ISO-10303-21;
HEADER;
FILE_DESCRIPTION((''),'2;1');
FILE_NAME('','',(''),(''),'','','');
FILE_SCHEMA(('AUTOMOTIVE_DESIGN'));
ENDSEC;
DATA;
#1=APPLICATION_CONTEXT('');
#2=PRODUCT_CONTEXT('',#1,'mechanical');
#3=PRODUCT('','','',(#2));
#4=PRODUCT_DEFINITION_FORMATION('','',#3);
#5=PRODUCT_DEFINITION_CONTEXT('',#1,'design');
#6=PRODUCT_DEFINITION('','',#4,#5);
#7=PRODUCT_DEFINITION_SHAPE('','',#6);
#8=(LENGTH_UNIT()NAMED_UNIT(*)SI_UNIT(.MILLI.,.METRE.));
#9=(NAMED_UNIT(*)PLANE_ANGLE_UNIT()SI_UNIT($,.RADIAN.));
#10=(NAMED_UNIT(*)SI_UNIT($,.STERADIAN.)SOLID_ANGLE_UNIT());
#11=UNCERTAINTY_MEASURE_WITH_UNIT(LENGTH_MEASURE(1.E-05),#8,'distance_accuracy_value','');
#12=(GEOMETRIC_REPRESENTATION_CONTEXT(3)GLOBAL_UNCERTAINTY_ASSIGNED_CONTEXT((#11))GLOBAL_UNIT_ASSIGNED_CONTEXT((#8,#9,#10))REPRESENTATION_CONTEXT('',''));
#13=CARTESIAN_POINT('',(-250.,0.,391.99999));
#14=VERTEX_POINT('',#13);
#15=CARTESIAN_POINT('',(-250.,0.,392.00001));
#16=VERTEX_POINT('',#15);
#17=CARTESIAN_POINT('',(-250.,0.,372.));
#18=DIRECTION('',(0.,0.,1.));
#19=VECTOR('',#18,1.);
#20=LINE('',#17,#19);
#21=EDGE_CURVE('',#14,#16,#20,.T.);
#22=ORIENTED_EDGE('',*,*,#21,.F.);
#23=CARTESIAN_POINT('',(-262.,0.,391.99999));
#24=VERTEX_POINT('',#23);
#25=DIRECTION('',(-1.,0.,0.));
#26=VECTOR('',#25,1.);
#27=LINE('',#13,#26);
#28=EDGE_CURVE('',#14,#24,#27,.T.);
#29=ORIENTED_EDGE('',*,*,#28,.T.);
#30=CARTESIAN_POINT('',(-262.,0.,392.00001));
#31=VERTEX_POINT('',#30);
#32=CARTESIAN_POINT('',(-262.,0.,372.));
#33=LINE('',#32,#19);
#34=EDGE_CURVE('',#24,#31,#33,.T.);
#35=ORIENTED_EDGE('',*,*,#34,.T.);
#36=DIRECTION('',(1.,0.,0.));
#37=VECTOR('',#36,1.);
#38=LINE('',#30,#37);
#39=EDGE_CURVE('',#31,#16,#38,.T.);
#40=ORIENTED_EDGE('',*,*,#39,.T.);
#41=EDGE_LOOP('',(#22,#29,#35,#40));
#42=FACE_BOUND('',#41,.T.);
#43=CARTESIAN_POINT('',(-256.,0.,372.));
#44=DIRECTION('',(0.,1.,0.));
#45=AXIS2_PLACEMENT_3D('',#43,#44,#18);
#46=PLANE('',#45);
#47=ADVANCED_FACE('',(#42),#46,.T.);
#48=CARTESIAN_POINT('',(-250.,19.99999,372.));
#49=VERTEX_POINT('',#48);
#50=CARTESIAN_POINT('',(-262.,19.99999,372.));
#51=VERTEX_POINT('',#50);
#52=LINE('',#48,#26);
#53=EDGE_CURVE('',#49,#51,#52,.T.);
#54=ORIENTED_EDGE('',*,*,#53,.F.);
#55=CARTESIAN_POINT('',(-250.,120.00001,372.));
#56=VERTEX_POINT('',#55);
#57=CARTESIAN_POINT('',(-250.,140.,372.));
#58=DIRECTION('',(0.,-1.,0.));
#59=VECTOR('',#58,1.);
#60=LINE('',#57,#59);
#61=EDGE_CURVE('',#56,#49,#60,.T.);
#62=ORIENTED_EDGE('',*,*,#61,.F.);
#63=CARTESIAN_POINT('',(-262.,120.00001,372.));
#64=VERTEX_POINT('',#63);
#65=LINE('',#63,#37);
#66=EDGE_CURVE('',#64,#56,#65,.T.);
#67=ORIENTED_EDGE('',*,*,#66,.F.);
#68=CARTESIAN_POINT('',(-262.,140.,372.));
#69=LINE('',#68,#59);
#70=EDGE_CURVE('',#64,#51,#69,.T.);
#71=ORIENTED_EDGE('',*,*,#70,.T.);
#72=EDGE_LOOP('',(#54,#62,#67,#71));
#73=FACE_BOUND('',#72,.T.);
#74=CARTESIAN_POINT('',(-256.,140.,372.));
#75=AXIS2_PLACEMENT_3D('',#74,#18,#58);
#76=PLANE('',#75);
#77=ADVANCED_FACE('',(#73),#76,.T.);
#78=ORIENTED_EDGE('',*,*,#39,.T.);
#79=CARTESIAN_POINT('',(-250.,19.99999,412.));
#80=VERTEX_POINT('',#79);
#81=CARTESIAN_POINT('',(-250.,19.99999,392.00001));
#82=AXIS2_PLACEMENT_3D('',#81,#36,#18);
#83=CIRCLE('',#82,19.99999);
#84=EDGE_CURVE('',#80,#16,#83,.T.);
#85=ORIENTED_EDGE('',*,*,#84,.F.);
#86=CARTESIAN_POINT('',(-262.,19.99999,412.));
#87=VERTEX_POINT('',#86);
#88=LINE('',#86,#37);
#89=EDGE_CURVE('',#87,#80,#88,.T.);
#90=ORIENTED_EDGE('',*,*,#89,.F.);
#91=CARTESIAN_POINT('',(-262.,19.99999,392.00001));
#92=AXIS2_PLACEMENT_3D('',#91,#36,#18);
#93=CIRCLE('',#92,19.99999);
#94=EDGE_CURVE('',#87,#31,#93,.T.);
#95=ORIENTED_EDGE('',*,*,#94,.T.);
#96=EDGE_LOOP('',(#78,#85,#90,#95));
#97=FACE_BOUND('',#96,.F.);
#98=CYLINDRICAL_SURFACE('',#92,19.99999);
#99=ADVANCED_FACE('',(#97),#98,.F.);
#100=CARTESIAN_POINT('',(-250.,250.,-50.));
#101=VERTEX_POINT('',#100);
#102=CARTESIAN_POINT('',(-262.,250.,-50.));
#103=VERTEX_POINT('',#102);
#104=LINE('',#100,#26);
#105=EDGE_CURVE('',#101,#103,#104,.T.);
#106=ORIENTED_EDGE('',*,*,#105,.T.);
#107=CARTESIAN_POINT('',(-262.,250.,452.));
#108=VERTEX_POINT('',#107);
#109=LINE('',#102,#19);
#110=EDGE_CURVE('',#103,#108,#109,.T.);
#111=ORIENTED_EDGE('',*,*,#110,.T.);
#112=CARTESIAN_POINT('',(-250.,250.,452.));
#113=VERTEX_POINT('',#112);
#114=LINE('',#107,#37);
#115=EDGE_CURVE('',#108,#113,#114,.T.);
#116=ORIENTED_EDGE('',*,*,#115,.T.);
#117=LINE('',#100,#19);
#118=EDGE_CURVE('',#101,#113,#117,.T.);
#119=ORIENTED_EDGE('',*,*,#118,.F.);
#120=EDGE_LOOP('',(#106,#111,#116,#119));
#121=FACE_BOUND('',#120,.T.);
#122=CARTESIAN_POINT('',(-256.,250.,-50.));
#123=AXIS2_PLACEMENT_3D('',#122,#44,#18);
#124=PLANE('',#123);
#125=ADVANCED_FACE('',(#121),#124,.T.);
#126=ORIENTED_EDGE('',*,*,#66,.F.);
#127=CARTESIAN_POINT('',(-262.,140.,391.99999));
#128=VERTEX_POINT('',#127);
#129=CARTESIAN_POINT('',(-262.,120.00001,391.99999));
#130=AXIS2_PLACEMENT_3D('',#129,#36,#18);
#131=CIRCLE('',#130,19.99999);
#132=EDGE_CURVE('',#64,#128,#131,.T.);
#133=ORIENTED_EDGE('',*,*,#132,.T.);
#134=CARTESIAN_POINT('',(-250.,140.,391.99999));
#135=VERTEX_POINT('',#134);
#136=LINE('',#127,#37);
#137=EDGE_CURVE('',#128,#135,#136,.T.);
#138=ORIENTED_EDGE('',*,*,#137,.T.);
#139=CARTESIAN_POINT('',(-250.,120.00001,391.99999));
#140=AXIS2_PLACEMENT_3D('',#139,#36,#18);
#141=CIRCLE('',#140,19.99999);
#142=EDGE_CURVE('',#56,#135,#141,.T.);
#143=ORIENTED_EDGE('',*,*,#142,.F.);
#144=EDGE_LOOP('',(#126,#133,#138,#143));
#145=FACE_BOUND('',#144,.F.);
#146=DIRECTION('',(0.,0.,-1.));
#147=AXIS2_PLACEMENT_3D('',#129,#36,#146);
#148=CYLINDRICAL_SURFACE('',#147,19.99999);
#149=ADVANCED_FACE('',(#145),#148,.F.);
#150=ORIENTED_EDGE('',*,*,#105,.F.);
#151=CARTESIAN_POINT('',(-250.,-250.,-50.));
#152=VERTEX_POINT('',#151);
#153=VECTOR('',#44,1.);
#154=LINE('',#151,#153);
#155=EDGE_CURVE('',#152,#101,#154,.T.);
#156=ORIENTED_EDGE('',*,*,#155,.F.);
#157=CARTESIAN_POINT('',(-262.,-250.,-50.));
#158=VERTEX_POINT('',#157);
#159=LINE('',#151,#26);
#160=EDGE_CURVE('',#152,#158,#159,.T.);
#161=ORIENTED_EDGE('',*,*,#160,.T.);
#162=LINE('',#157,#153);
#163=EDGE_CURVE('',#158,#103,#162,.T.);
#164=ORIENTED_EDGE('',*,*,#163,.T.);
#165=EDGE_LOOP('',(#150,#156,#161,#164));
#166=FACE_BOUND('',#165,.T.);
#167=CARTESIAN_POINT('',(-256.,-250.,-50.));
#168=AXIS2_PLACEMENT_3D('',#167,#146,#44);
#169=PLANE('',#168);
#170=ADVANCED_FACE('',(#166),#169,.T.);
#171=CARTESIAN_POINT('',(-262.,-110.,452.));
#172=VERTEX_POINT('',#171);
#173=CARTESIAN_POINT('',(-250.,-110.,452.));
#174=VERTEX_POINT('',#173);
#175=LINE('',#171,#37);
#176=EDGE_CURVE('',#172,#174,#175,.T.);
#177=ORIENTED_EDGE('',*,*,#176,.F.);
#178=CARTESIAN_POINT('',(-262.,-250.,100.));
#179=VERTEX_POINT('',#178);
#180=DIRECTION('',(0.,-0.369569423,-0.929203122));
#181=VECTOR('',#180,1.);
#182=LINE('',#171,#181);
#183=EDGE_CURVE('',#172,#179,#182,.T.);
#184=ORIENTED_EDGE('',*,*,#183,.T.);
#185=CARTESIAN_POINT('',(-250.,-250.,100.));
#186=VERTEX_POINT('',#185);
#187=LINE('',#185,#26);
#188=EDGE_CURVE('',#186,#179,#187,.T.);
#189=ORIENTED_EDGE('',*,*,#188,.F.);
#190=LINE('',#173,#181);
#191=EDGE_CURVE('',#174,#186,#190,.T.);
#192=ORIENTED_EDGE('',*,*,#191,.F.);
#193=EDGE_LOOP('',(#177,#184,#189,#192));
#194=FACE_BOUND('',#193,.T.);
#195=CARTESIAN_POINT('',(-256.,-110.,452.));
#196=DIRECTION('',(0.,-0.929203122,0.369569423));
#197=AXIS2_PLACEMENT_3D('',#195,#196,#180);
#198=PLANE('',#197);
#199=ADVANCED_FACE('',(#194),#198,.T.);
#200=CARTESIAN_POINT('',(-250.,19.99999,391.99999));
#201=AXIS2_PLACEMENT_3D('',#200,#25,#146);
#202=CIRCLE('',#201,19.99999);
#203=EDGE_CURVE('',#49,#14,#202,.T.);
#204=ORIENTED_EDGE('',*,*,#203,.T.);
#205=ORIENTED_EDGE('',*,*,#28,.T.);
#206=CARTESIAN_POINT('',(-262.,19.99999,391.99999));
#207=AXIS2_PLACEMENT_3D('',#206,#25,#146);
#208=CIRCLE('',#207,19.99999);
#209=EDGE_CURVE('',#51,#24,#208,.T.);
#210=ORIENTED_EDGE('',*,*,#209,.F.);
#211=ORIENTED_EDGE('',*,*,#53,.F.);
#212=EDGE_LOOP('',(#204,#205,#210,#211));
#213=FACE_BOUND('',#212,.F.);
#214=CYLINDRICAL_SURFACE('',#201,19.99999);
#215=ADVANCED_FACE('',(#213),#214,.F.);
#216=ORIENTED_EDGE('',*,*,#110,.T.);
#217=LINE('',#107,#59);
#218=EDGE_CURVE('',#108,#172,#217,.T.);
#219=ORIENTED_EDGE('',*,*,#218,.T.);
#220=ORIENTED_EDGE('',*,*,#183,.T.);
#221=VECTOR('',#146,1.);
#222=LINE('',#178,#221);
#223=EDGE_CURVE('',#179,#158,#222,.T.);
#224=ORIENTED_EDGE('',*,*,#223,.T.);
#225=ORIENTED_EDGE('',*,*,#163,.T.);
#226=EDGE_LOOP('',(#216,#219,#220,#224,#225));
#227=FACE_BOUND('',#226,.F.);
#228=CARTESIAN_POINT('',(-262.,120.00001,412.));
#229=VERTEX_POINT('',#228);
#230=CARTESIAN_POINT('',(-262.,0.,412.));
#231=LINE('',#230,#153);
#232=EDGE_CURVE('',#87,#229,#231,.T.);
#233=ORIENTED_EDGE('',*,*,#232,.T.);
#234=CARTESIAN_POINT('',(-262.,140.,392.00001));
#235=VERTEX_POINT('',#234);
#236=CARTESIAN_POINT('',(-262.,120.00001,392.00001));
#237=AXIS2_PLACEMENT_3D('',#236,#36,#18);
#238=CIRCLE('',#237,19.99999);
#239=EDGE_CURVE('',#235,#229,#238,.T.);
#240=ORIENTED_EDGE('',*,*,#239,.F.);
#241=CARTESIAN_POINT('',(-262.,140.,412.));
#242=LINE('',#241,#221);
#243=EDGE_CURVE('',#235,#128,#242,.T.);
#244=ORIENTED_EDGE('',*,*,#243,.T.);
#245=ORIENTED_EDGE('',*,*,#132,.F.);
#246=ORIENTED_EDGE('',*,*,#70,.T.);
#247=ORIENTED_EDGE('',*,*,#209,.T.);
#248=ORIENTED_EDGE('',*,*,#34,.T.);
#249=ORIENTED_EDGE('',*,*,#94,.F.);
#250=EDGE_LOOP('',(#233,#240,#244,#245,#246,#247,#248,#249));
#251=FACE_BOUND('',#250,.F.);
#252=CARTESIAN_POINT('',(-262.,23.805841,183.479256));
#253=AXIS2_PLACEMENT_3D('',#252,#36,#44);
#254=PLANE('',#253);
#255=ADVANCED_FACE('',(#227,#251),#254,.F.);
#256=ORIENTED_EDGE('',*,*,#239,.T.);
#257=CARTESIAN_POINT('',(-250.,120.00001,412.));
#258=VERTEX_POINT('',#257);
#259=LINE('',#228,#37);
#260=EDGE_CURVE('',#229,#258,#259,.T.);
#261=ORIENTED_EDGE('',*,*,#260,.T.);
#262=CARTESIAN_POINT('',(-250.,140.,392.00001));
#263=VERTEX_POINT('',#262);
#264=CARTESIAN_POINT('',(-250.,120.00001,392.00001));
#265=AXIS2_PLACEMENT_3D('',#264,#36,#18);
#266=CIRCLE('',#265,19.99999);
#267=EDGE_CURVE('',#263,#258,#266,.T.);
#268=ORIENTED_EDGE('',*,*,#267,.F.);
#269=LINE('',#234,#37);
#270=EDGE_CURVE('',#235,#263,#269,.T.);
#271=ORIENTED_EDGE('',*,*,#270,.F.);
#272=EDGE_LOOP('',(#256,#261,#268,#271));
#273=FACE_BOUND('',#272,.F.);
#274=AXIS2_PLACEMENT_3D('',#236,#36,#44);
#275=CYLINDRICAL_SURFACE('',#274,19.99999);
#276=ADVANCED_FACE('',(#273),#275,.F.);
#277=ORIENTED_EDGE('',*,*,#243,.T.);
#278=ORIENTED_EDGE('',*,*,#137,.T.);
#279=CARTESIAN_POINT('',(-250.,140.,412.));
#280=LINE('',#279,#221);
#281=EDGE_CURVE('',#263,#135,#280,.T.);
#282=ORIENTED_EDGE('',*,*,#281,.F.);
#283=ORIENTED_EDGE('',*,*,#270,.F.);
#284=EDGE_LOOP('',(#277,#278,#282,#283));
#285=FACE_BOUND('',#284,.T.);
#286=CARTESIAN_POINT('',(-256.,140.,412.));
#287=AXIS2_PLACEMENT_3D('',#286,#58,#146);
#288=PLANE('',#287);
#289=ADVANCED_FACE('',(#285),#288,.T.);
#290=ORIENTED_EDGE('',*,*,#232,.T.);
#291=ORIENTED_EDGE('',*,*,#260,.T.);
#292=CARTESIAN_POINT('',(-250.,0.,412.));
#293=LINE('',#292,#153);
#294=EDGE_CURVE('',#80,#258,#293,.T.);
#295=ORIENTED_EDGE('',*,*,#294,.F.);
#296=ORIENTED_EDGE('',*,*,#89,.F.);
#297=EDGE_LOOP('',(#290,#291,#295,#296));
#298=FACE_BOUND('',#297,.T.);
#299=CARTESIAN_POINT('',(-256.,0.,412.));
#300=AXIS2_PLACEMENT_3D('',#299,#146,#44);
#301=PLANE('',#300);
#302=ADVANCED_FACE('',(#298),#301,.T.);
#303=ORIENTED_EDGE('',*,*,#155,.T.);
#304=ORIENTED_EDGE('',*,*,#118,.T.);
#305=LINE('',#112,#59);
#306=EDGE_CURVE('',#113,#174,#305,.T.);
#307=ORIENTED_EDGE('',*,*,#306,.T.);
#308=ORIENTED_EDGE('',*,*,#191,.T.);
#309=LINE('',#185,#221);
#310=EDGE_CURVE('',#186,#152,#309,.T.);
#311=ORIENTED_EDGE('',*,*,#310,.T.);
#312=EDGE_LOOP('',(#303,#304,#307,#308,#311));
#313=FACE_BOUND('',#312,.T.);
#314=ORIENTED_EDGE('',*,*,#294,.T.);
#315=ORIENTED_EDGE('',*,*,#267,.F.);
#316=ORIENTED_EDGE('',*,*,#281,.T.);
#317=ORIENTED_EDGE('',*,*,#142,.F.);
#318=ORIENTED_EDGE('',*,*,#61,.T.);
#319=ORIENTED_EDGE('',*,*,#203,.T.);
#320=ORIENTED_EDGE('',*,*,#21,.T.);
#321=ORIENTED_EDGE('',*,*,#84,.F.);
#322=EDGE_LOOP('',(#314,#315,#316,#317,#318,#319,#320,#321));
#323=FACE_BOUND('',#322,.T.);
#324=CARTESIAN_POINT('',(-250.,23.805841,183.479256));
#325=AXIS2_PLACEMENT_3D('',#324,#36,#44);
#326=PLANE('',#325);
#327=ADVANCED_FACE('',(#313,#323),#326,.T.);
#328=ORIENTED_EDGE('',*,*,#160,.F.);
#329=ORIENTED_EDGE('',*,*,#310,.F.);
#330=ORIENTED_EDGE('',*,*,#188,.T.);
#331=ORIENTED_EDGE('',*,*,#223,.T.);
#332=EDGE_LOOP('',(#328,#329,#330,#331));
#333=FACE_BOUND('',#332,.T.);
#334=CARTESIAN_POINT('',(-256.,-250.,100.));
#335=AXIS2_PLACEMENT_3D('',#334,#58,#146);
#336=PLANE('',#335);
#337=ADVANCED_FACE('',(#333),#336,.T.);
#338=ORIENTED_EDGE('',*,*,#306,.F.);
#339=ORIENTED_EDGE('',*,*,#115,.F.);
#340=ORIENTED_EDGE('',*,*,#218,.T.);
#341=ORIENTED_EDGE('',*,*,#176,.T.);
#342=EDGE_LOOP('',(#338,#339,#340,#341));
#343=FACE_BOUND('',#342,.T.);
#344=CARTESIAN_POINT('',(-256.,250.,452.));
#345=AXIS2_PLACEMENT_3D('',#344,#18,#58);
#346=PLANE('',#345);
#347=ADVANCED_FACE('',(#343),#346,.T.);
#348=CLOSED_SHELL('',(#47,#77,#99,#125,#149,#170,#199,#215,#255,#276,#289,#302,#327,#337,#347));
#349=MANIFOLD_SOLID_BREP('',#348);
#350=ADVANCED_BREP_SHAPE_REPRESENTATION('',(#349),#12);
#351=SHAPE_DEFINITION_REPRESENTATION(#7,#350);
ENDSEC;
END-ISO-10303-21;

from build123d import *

# Parameters (mm, degrees)
F0_W      = 500
F0_H      = 500
F1_DEPTH  = 12
F2_W      = 500
F2_H      = 50
F3_DEPTH  = 6
F6_DEPTH  = 6
F14_DEPTH = 6
F15_R     = 19.99999
F19_DEPTH = 6
F22_DEPTH = 12
F25_DEPTH = 6
F27_W     = 12
F27_H     = 320
F28_DEPTH = 44
F31_W     = 196
F31_H     = 12
F32_DEPTH = 44
F37_DEPTH = 3
F43_DEPTH = 12


# Not quite as in the source:
# - a fillet or chamfer is up to 0.001 mm smaller than in the source, because OpenCascade refuses the exact size


with BuildPart() as f1:
    # F0 (on Top) → F1 (new body)
    with BuildSketch(Plane.XY):
        Rectangle(F0_W, F0_H)
    extrude(amount=F1_DEPTH)


with BuildPart() as f3:
    # F2 (on Right) → F3 (new body, symmetric)
    with BuildSketch(Plane.YZ):
        Rectangle(F2_W, F2_H)
    extrude(amount=F3_DEPTH, both=True)


with BuildPart() as f3_1:
    # F4: moved
    add(f3.part.moved(Location((0, 0, -25))))


with BuildPart() as f6:
    # F5 (on Front) → F6 (new body, symmetric)
    with BuildSketch(Plane.XZ):
        Polygon((-250, -25), (250, -25), (250, 25), (6, 25), (6, 0), (-6, 0), (-6, 25), (-250, 25), align=None)
    extrude(amount=F6_DEPTH, both=True)


with BuildPart() as f6_1:
    # F7: moved
    add(f6.part.moved(Location((0, 80, -25))))


with BuildPart() as f8_1:
    # F8: copy of F6
    add(f6_1.part)


with BuildPart() as f3_2:
    add(f3_1.part)

    # F10: cut F6
    add(f6_1.part, mode=Mode.SUBTRACT)


with BuildPart() as f11_1:
    # F11: copy of F6
    add(f6_1.part.moved(Location((0, 164, 0))))


with BuildPart() as f3_3:
    add(f3_2.part)

    # F12: cut F11_1
    add(f11_1.part, mode=Mode.SUBTRACT)


with BuildPart() as f14:
    # F13 (on Right) → F14 (new body, symmetric)
    with BuildSketch(Plane.YZ):
        Polygon((250, -50), (250, 0), (250, 452), (70, 452), (-110, 452), (-250, 100), (-250, -50), align=None)
        Polygon((0, 412), (70, 412), (140, 412), (140, 372), (0, 372), align=None, mode=Mode.SUBTRACT)
    extrude(amount=F14_DEPTH, both=True)

    # F15 (radius 20 in the source; OpenCascade refuses exactly that, so slightly less here)
    f15_edges = [f14.edges().sort_by_distance(p)[0] for p in [
        (0, 140, 372),
        (0, 140, 412),
        (0, 0, 412),
        (0, 0, 372),
    ]]
    fillet(f15_edges, radius=F15_R)


with BuildPart() as f14_1:
    # F16: moved
    add(f14.part.moved(Location((-256, 0, 0))))


with BuildPart() as f17_1:
    # F17: copy of F14
    add(f14_1.part.moved(Location((512, 0, 0))))


with BuildPart() as f19:
    # F18 (on Front) → F19 (new body, symmetric)
    with BuildSketch(Plane.XZ):
        Polygon((-262, 452), (-262, 0), (-262, -50), (262, -50), (262, 452), align=None)
    extrude(amount=F19_DEPTH, both=True)


with BuildPart() as f19_1:
    # F20: moved
    add(f19.part.moved(Location((0, 256, 0))))


with BuildPart() as f22:
    # F21 (on face) → F22 (new body)
    with BuildSketch(Plane.XY.offset(12)):
        Polygon((262, 262), (0, 262), (-262, 262), (-262, -110), (262, -110), align=None)
    extrude(amount=F22_DEPTH)


with BuildPart() as f22_1:
    # F23: moved
    add(f22.part.moved(Location((0, 0, 440))))


with BuildPart() as f25:
    # F24 (on Front) → F25 (new body, symmetric)
    with BuildSketch(Plane.XZ):
        Polygon((-250, 12), (0, 12), (250, 12), (250, 100), (-250, 100), align=None)
    extrude(amount=F25_DEPTH, both=True)


with BuildPart() as f25_1:
    # F26: moved
    add(f25.part.moved(Location((0, -244, 0))))


with BuildPart() as f28:
    # F27 (on Top) → F28 (new body)
    with BuildSketch(Plane.XY):
        with Locations((-24, -90)):
            Rectangle(F27_W, F27_H)
    extrude(amount=F28_DEPTH)


with BuildPart() as f28_1:
    # F29: moved
    add(f28.part.moved(Location((0, 0, -48))))


with BuildPart() as f30_1:
    # F30: copy of F28
    add(f28_1.part.moved(Location((-208, 0, 0))))


with BuildPart() as f32:
    # F31 (on Top) → F32 (new body)
    with BuildSketch(Plane.XY):
        with Locations((-128, -244)):
            Rectangle(F31_W, F31_H)
    extrude(amount=-F32_DEPTH)


with BuildPart() as f32_1:
    # F33: moved
    add(f32.part.moved(Location((0, 0, -4))))


with BuildPart() as f34_1:
    # F34: copy of F32
    add(f32_1.part.moved(Location((0, 308, 0))))


with BuildPart() as f35_1:
    # F35: copy of F32
    add(f32_1.part.moved(Location((256, 0, 0))))


with BuildPart() as f35_2:
    # F35: copy of F30_1
    add(f30_1.part.moved(Location((256, 0, 0))))


with BuildPart() as f35_3:
    # F35: copy of F28
    add(f28_1.part.moved(Location((256, 0, 0))))


with BuildPart() as f35_4:
    # F35: copy of F34_1
    add(f34_1.part.moved(Location((256, 0, 0))))


with BuildPart() as f37:
    # F36 (on Top) → F37 (new body)
    with BuildSketch(Plane.XY):
        Polygon((-24, -244), (-24, 0), (-24, 64), (-232, 64), (-232, -244), align=None)
    extrude(amount=F37_DEPTH)


with BuildPart() as f37_1:
    # F38: moved
    add(f37.part.moved(Location((0, 0, -44))))


with BuildPart() as f39_1:
    # F39: copy of F37
    add(f37_1.part.moved(Location((256, 0, 0))))


with BuildPart() as f30_1_1:
    add(f30_1.part)

    # F40: cut F37
    add(f37_1.part, mode=Mode.SUBTRACT)


with BuildPart() as f32_2:
    add(f32_1.part)

    # F40: cut F37
    add(f37_1.part, mode=Mode.SUBTRACT)


with BuildPart() as f28_2:
    add(f28_1.part)

    # F40: cut F37
    add(f37_1.part, mode=Mode.SUBTRACT)


with BuildPart() as f34_1_1:
    add(f34_1.part)

    # F40: cut F37
    add(f37_1.part, mode=Mode.SUBTRACT)


with BuildPart() as f35_1_1:
    add(f35_1.part)

    # F41: cut F39_1
    add(f39_1.part, mode=Mode.SUBTRACT)


with BuildPart() as f35_3_1:
    add(f35_3.part)

    # F41: cut F39_1
    add(f39_1.part, mode=Mode.SUBTRACT)


with BuildPart() as f35_4_1:
    add(f35_4.part)

    # F41: cut F39_1
    add(f39_1.part, mode=Mode.SUBTRACT)


with BuildPart() as f35_2_1:
    add(f35_2.part)

    # F41: cut F39_1
    add(f39_1.part, mode=Mode.SUBTRACT)


with BuildPart() as f43:
    # F42 (on Front) → F43 (new body)
    with BuildSketch(Plane.XZ):
        Polygon((0, 12), (0, 0), (0, -50), (262, -50), (262, 12), align=None)
    extrude(amount=F43_DEPTH)


with BuildPart() as f43_1:
    # F44: moved
    add(f43.part.moved(Location((0, -250, 0))))


with BuildPart() as f45_1:
    # F45: copy of F43
    add(f43_1.part.moved(Location((-262, 0, 0))))


solid = f14_1.part
